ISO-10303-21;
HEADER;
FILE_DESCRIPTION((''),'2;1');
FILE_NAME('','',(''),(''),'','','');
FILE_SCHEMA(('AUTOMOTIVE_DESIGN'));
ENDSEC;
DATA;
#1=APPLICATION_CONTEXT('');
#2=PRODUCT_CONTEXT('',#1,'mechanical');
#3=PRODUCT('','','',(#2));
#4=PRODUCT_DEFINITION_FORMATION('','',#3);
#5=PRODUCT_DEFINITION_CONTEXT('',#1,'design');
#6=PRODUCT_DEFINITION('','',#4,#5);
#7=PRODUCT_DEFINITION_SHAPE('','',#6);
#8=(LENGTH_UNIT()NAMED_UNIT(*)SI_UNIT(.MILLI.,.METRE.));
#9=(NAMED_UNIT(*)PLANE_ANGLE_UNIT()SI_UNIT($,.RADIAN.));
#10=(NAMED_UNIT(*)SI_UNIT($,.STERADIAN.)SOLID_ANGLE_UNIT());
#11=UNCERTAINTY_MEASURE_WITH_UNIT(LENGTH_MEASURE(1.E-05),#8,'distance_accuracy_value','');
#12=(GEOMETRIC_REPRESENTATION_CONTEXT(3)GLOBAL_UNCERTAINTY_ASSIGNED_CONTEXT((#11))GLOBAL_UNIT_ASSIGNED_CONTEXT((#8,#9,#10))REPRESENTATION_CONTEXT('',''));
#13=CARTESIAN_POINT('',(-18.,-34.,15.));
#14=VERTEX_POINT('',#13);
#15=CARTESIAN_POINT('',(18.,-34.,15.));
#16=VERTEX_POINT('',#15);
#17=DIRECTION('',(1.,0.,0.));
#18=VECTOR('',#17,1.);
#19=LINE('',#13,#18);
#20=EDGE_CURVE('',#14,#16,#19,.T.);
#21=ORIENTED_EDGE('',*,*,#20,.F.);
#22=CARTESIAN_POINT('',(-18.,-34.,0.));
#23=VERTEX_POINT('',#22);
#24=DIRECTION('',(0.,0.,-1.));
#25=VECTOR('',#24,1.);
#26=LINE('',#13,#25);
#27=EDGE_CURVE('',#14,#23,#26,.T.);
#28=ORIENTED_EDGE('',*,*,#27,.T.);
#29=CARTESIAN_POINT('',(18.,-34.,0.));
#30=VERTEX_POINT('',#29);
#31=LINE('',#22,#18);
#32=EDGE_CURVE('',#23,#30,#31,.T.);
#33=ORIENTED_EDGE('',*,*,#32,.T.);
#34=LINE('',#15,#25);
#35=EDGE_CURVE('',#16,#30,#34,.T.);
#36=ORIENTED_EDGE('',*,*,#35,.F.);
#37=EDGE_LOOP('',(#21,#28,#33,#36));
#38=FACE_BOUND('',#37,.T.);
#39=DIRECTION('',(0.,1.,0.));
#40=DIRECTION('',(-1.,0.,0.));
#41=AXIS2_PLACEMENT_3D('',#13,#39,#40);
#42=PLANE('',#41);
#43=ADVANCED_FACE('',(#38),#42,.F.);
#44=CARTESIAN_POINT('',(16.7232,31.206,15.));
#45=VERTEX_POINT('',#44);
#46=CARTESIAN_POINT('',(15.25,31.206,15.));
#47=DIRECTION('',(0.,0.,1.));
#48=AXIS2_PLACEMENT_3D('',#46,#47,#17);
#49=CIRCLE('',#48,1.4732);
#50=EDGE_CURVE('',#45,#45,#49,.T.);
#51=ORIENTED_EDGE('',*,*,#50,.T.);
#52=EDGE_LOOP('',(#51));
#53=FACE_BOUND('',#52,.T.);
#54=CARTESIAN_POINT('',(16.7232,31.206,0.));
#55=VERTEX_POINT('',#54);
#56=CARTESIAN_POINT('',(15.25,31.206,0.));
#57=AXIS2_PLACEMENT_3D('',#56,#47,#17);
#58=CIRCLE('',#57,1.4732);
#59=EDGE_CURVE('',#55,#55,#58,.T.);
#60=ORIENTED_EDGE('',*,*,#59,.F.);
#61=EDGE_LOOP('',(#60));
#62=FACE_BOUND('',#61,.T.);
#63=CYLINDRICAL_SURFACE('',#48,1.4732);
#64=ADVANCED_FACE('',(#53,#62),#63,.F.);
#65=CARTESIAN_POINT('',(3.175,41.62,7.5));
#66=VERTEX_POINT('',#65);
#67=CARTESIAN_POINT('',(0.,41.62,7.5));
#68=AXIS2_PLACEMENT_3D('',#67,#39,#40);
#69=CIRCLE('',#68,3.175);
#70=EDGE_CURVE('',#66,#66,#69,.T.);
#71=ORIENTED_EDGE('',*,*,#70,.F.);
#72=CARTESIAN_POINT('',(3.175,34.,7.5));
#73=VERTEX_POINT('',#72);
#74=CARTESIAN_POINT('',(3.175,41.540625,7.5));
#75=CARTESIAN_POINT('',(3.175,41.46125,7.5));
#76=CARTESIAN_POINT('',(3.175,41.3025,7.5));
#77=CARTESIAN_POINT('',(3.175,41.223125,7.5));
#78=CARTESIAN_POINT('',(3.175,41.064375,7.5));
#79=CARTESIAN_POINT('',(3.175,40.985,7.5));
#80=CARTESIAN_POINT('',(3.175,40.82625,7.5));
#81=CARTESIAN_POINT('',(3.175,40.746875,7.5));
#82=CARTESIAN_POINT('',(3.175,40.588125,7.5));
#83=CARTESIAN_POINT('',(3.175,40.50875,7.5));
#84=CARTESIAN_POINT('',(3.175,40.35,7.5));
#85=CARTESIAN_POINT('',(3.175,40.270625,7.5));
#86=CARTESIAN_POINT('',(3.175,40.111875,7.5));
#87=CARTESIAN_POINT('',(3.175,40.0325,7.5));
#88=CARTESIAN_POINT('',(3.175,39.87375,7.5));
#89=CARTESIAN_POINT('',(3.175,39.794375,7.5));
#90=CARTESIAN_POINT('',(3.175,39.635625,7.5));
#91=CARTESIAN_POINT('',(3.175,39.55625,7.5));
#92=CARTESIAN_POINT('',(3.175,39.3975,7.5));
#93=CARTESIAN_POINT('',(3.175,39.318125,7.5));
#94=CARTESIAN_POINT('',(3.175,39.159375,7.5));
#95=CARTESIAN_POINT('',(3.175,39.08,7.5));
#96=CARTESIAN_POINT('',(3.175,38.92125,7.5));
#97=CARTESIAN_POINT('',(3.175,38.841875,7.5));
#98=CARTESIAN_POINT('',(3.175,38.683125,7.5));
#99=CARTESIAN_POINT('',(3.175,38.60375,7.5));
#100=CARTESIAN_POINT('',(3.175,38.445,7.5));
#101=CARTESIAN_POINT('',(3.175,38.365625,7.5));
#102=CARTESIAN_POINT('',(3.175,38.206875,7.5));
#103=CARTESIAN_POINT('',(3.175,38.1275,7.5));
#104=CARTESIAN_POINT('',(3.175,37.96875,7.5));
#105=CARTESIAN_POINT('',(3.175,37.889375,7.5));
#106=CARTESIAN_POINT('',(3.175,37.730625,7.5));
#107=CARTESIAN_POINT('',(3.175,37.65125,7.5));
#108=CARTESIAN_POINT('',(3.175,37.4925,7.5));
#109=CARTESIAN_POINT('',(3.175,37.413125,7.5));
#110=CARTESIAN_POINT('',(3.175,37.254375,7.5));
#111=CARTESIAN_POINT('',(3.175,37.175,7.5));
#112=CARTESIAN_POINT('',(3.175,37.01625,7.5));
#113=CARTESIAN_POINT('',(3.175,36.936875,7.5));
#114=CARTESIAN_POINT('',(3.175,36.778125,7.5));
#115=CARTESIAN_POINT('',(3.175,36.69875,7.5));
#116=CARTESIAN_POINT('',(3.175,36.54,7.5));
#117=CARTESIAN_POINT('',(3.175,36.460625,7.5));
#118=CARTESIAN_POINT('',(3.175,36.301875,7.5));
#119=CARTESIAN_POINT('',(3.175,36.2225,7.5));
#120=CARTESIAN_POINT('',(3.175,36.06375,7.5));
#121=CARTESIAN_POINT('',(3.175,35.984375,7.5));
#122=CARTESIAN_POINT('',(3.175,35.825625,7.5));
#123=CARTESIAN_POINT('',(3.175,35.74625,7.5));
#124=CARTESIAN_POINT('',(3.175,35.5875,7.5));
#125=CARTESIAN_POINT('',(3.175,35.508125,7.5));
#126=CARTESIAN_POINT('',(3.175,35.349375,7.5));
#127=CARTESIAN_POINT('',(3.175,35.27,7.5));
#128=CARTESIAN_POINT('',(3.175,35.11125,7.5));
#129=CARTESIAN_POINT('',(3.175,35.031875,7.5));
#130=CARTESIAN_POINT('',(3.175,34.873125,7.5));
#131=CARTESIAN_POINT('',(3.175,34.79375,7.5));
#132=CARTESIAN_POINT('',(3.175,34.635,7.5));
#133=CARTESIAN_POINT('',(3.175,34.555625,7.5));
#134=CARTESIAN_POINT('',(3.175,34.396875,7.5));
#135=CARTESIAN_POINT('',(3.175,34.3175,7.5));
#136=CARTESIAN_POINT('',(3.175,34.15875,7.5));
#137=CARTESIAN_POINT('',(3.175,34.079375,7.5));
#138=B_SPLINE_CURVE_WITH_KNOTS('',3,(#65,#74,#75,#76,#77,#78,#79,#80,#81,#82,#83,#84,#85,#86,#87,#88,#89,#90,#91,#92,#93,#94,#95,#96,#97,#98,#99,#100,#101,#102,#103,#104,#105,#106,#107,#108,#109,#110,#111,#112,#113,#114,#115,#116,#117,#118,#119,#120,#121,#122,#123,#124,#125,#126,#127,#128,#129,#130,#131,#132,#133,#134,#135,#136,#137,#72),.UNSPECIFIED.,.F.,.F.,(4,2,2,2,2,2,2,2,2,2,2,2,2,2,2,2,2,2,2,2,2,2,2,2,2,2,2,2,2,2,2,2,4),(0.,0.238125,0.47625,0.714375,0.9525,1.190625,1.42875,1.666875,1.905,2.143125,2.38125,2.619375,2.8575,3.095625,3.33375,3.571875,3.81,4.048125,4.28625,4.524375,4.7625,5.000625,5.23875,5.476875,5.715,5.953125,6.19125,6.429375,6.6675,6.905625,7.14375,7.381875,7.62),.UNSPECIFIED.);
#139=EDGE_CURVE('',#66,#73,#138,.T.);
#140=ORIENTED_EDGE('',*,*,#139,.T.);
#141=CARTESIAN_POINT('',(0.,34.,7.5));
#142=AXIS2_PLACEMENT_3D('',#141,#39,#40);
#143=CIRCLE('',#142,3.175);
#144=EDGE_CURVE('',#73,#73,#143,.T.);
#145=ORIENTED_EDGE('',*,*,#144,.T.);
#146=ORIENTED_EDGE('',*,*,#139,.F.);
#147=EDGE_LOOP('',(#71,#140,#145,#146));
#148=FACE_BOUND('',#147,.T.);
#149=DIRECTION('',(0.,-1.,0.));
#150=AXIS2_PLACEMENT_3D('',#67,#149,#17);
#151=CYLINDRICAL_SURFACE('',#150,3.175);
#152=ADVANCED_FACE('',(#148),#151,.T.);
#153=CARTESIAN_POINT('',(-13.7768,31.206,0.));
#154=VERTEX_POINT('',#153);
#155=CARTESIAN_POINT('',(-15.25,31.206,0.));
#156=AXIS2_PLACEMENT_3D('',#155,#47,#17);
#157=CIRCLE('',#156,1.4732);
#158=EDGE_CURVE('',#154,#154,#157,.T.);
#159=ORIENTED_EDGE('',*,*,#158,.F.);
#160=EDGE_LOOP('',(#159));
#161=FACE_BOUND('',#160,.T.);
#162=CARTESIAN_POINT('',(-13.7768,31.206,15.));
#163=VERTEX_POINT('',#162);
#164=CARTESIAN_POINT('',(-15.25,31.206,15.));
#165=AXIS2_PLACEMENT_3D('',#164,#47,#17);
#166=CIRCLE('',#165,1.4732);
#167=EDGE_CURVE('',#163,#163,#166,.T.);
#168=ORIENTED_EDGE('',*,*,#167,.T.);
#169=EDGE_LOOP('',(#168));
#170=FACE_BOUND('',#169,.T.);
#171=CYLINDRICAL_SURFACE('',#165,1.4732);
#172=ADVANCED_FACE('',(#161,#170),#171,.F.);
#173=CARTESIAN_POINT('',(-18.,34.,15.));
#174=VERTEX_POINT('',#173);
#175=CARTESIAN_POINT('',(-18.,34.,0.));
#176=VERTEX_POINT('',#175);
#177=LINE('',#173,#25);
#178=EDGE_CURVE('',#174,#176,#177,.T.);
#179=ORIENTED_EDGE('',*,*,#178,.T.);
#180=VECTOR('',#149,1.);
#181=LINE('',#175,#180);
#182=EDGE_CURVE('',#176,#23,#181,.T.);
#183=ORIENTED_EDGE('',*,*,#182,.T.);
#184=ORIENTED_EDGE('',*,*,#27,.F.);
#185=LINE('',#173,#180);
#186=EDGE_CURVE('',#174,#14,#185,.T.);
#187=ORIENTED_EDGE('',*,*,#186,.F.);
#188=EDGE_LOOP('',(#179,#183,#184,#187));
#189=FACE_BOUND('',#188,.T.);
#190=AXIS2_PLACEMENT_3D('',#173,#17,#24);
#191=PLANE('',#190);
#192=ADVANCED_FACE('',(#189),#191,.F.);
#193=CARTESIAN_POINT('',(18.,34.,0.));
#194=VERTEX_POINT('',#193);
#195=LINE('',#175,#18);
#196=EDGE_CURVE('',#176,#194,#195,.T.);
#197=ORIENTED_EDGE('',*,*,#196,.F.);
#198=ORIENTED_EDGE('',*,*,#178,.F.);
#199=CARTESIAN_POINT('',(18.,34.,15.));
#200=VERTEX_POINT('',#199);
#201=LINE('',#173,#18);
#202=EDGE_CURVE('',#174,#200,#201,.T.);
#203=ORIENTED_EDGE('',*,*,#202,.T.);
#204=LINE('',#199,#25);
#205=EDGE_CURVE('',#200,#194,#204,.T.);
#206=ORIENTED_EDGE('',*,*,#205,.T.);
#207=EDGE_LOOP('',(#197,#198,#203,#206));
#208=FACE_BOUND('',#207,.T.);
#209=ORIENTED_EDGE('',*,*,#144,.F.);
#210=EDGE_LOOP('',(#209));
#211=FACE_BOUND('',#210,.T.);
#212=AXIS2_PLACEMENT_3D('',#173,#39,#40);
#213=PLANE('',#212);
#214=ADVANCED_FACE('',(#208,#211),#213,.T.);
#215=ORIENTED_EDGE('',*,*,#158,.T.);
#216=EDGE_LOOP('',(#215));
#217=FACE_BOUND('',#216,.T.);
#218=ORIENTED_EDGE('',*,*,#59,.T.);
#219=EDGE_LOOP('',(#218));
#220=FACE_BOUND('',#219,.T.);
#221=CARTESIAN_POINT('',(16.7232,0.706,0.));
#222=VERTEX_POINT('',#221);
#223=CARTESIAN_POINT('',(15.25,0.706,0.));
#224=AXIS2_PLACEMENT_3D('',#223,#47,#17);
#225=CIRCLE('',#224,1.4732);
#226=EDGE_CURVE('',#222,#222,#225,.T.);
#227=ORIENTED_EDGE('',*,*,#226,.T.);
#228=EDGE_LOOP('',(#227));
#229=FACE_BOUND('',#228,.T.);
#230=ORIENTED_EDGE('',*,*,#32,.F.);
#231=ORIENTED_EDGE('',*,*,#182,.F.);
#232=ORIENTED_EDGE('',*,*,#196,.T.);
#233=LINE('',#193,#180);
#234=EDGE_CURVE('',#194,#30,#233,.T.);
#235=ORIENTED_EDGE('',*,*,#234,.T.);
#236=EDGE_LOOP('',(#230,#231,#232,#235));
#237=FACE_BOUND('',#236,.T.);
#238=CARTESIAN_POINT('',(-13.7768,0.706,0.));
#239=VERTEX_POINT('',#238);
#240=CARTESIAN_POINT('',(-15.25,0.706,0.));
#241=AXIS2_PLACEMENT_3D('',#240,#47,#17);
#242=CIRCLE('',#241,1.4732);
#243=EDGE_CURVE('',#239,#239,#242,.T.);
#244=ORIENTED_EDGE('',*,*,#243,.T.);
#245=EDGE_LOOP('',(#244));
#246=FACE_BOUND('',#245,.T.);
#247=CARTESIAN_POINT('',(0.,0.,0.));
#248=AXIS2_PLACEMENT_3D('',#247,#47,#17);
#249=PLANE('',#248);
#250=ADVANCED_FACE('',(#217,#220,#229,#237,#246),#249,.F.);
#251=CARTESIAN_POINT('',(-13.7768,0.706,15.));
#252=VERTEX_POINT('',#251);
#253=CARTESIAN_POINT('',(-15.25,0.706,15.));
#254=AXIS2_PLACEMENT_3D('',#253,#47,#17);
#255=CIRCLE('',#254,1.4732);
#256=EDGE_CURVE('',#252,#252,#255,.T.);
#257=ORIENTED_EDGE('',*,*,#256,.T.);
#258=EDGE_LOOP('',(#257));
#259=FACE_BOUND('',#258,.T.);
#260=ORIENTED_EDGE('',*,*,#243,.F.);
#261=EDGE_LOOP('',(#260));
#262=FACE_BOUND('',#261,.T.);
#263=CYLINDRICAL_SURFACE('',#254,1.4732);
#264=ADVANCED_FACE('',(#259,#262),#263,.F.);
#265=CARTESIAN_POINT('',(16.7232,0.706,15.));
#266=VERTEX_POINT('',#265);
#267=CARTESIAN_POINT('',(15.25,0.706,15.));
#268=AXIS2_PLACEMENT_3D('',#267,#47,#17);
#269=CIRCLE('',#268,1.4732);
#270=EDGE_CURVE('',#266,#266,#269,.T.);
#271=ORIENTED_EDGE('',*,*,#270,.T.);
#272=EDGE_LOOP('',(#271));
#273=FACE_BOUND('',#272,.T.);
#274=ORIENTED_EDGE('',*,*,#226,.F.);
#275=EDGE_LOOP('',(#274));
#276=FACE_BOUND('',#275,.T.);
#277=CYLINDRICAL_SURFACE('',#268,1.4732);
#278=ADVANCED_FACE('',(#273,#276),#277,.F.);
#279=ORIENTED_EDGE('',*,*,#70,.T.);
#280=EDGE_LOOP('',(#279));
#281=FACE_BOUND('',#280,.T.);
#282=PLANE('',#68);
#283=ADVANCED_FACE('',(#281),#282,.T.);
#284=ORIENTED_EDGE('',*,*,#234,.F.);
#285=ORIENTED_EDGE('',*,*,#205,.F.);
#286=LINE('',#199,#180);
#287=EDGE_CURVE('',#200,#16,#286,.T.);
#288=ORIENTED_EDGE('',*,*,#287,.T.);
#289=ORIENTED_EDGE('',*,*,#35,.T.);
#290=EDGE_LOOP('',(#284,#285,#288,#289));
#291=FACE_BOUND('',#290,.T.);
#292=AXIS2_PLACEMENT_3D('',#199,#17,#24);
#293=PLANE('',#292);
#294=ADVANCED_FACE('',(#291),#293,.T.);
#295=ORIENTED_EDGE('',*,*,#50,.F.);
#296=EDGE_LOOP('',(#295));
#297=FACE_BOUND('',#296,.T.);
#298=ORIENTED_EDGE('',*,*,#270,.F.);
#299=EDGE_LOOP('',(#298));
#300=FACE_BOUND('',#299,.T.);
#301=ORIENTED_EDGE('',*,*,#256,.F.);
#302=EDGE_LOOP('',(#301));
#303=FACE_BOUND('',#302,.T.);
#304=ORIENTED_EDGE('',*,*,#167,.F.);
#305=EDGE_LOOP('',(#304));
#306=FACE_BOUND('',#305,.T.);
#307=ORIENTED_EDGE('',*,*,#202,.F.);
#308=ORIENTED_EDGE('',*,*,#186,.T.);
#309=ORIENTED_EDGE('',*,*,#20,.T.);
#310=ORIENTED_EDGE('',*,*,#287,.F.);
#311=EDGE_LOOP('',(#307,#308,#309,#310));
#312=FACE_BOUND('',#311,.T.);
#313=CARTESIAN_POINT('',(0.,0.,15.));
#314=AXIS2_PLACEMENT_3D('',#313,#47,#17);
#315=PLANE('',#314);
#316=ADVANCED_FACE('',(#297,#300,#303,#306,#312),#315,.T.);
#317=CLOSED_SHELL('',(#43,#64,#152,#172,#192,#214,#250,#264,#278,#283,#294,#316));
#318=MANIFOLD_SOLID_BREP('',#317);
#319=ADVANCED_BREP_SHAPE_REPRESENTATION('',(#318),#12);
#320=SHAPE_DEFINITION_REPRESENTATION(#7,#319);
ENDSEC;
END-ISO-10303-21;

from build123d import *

# Parameters (mm, degrees)
SKETCH1_W                          = 36
SKETCH1_H                          = 68
BOSS_EXTRUDE1_DEPTH                = 15
F_1_16_0_116_DOWEL_HOLE1_OUTLINE_R = 1.4732
F_1_16_0_116_DOWEL_HOLE1_DEPTH     = 15
SKETCH5_R                          = 3.175
BOSS_EXTRUDE2_DEPTH                = 7.62


# Read off the part's stored shape, not the designer's step: 1/16 (0.116) Dowel Hole1
with BuildPart() as part:
    # Sketch1 → Boss-Extrude1 (new body)
    with BuildSketch(Plane.XY):
        Rectangle(SKETCH1_W, SKETCH1_H)
    extrude(amount=BOSS_EXTRUDE1_DEPTH)

    # 1/16 (0.116) Dowel Hole1 outline → 1/16 (0.116) Dowel Hole1 (cut)
    with BuildSketch(Plane.XY):
        with Locations((15.25, 31.206)):
            Circle(F_1_16_0_116_DOWEL_HOLE1_OUTLINE_R)
        with Locations((-15.25, 0.706)):
            Circle(F_1_16_0_116_DOWEL_HOLE1_OUTLINE_R)
        with Locations((15.25, 0.706)):
            Circle(F_1_16_0_116_DOWEL_HOLE1_OUTLINE_R)
        with Locations((-15.25, 31.206)):
            Circle(F_1_16_0_116_DOWEL_HOLE1_OUTLINE_R)
    extrude(amount=F_1_16_0_116_DOWEL_HOLE1_DEPTH, mode=Mode.SUBTRACT)

    # Sketch5 → Boss-Extrude2 (add)
    with BuildSketch(Plane(origin=(0, 34, 0), x_dir=(1, 0, 0), z_dir=(0, 1, 0))):
        with Locations((0, -7.5)):
            Circle(SKETCH5_R)
    extrude(amount=BOSS_EXTRUDE2_DEPTH)


solid = part.part
